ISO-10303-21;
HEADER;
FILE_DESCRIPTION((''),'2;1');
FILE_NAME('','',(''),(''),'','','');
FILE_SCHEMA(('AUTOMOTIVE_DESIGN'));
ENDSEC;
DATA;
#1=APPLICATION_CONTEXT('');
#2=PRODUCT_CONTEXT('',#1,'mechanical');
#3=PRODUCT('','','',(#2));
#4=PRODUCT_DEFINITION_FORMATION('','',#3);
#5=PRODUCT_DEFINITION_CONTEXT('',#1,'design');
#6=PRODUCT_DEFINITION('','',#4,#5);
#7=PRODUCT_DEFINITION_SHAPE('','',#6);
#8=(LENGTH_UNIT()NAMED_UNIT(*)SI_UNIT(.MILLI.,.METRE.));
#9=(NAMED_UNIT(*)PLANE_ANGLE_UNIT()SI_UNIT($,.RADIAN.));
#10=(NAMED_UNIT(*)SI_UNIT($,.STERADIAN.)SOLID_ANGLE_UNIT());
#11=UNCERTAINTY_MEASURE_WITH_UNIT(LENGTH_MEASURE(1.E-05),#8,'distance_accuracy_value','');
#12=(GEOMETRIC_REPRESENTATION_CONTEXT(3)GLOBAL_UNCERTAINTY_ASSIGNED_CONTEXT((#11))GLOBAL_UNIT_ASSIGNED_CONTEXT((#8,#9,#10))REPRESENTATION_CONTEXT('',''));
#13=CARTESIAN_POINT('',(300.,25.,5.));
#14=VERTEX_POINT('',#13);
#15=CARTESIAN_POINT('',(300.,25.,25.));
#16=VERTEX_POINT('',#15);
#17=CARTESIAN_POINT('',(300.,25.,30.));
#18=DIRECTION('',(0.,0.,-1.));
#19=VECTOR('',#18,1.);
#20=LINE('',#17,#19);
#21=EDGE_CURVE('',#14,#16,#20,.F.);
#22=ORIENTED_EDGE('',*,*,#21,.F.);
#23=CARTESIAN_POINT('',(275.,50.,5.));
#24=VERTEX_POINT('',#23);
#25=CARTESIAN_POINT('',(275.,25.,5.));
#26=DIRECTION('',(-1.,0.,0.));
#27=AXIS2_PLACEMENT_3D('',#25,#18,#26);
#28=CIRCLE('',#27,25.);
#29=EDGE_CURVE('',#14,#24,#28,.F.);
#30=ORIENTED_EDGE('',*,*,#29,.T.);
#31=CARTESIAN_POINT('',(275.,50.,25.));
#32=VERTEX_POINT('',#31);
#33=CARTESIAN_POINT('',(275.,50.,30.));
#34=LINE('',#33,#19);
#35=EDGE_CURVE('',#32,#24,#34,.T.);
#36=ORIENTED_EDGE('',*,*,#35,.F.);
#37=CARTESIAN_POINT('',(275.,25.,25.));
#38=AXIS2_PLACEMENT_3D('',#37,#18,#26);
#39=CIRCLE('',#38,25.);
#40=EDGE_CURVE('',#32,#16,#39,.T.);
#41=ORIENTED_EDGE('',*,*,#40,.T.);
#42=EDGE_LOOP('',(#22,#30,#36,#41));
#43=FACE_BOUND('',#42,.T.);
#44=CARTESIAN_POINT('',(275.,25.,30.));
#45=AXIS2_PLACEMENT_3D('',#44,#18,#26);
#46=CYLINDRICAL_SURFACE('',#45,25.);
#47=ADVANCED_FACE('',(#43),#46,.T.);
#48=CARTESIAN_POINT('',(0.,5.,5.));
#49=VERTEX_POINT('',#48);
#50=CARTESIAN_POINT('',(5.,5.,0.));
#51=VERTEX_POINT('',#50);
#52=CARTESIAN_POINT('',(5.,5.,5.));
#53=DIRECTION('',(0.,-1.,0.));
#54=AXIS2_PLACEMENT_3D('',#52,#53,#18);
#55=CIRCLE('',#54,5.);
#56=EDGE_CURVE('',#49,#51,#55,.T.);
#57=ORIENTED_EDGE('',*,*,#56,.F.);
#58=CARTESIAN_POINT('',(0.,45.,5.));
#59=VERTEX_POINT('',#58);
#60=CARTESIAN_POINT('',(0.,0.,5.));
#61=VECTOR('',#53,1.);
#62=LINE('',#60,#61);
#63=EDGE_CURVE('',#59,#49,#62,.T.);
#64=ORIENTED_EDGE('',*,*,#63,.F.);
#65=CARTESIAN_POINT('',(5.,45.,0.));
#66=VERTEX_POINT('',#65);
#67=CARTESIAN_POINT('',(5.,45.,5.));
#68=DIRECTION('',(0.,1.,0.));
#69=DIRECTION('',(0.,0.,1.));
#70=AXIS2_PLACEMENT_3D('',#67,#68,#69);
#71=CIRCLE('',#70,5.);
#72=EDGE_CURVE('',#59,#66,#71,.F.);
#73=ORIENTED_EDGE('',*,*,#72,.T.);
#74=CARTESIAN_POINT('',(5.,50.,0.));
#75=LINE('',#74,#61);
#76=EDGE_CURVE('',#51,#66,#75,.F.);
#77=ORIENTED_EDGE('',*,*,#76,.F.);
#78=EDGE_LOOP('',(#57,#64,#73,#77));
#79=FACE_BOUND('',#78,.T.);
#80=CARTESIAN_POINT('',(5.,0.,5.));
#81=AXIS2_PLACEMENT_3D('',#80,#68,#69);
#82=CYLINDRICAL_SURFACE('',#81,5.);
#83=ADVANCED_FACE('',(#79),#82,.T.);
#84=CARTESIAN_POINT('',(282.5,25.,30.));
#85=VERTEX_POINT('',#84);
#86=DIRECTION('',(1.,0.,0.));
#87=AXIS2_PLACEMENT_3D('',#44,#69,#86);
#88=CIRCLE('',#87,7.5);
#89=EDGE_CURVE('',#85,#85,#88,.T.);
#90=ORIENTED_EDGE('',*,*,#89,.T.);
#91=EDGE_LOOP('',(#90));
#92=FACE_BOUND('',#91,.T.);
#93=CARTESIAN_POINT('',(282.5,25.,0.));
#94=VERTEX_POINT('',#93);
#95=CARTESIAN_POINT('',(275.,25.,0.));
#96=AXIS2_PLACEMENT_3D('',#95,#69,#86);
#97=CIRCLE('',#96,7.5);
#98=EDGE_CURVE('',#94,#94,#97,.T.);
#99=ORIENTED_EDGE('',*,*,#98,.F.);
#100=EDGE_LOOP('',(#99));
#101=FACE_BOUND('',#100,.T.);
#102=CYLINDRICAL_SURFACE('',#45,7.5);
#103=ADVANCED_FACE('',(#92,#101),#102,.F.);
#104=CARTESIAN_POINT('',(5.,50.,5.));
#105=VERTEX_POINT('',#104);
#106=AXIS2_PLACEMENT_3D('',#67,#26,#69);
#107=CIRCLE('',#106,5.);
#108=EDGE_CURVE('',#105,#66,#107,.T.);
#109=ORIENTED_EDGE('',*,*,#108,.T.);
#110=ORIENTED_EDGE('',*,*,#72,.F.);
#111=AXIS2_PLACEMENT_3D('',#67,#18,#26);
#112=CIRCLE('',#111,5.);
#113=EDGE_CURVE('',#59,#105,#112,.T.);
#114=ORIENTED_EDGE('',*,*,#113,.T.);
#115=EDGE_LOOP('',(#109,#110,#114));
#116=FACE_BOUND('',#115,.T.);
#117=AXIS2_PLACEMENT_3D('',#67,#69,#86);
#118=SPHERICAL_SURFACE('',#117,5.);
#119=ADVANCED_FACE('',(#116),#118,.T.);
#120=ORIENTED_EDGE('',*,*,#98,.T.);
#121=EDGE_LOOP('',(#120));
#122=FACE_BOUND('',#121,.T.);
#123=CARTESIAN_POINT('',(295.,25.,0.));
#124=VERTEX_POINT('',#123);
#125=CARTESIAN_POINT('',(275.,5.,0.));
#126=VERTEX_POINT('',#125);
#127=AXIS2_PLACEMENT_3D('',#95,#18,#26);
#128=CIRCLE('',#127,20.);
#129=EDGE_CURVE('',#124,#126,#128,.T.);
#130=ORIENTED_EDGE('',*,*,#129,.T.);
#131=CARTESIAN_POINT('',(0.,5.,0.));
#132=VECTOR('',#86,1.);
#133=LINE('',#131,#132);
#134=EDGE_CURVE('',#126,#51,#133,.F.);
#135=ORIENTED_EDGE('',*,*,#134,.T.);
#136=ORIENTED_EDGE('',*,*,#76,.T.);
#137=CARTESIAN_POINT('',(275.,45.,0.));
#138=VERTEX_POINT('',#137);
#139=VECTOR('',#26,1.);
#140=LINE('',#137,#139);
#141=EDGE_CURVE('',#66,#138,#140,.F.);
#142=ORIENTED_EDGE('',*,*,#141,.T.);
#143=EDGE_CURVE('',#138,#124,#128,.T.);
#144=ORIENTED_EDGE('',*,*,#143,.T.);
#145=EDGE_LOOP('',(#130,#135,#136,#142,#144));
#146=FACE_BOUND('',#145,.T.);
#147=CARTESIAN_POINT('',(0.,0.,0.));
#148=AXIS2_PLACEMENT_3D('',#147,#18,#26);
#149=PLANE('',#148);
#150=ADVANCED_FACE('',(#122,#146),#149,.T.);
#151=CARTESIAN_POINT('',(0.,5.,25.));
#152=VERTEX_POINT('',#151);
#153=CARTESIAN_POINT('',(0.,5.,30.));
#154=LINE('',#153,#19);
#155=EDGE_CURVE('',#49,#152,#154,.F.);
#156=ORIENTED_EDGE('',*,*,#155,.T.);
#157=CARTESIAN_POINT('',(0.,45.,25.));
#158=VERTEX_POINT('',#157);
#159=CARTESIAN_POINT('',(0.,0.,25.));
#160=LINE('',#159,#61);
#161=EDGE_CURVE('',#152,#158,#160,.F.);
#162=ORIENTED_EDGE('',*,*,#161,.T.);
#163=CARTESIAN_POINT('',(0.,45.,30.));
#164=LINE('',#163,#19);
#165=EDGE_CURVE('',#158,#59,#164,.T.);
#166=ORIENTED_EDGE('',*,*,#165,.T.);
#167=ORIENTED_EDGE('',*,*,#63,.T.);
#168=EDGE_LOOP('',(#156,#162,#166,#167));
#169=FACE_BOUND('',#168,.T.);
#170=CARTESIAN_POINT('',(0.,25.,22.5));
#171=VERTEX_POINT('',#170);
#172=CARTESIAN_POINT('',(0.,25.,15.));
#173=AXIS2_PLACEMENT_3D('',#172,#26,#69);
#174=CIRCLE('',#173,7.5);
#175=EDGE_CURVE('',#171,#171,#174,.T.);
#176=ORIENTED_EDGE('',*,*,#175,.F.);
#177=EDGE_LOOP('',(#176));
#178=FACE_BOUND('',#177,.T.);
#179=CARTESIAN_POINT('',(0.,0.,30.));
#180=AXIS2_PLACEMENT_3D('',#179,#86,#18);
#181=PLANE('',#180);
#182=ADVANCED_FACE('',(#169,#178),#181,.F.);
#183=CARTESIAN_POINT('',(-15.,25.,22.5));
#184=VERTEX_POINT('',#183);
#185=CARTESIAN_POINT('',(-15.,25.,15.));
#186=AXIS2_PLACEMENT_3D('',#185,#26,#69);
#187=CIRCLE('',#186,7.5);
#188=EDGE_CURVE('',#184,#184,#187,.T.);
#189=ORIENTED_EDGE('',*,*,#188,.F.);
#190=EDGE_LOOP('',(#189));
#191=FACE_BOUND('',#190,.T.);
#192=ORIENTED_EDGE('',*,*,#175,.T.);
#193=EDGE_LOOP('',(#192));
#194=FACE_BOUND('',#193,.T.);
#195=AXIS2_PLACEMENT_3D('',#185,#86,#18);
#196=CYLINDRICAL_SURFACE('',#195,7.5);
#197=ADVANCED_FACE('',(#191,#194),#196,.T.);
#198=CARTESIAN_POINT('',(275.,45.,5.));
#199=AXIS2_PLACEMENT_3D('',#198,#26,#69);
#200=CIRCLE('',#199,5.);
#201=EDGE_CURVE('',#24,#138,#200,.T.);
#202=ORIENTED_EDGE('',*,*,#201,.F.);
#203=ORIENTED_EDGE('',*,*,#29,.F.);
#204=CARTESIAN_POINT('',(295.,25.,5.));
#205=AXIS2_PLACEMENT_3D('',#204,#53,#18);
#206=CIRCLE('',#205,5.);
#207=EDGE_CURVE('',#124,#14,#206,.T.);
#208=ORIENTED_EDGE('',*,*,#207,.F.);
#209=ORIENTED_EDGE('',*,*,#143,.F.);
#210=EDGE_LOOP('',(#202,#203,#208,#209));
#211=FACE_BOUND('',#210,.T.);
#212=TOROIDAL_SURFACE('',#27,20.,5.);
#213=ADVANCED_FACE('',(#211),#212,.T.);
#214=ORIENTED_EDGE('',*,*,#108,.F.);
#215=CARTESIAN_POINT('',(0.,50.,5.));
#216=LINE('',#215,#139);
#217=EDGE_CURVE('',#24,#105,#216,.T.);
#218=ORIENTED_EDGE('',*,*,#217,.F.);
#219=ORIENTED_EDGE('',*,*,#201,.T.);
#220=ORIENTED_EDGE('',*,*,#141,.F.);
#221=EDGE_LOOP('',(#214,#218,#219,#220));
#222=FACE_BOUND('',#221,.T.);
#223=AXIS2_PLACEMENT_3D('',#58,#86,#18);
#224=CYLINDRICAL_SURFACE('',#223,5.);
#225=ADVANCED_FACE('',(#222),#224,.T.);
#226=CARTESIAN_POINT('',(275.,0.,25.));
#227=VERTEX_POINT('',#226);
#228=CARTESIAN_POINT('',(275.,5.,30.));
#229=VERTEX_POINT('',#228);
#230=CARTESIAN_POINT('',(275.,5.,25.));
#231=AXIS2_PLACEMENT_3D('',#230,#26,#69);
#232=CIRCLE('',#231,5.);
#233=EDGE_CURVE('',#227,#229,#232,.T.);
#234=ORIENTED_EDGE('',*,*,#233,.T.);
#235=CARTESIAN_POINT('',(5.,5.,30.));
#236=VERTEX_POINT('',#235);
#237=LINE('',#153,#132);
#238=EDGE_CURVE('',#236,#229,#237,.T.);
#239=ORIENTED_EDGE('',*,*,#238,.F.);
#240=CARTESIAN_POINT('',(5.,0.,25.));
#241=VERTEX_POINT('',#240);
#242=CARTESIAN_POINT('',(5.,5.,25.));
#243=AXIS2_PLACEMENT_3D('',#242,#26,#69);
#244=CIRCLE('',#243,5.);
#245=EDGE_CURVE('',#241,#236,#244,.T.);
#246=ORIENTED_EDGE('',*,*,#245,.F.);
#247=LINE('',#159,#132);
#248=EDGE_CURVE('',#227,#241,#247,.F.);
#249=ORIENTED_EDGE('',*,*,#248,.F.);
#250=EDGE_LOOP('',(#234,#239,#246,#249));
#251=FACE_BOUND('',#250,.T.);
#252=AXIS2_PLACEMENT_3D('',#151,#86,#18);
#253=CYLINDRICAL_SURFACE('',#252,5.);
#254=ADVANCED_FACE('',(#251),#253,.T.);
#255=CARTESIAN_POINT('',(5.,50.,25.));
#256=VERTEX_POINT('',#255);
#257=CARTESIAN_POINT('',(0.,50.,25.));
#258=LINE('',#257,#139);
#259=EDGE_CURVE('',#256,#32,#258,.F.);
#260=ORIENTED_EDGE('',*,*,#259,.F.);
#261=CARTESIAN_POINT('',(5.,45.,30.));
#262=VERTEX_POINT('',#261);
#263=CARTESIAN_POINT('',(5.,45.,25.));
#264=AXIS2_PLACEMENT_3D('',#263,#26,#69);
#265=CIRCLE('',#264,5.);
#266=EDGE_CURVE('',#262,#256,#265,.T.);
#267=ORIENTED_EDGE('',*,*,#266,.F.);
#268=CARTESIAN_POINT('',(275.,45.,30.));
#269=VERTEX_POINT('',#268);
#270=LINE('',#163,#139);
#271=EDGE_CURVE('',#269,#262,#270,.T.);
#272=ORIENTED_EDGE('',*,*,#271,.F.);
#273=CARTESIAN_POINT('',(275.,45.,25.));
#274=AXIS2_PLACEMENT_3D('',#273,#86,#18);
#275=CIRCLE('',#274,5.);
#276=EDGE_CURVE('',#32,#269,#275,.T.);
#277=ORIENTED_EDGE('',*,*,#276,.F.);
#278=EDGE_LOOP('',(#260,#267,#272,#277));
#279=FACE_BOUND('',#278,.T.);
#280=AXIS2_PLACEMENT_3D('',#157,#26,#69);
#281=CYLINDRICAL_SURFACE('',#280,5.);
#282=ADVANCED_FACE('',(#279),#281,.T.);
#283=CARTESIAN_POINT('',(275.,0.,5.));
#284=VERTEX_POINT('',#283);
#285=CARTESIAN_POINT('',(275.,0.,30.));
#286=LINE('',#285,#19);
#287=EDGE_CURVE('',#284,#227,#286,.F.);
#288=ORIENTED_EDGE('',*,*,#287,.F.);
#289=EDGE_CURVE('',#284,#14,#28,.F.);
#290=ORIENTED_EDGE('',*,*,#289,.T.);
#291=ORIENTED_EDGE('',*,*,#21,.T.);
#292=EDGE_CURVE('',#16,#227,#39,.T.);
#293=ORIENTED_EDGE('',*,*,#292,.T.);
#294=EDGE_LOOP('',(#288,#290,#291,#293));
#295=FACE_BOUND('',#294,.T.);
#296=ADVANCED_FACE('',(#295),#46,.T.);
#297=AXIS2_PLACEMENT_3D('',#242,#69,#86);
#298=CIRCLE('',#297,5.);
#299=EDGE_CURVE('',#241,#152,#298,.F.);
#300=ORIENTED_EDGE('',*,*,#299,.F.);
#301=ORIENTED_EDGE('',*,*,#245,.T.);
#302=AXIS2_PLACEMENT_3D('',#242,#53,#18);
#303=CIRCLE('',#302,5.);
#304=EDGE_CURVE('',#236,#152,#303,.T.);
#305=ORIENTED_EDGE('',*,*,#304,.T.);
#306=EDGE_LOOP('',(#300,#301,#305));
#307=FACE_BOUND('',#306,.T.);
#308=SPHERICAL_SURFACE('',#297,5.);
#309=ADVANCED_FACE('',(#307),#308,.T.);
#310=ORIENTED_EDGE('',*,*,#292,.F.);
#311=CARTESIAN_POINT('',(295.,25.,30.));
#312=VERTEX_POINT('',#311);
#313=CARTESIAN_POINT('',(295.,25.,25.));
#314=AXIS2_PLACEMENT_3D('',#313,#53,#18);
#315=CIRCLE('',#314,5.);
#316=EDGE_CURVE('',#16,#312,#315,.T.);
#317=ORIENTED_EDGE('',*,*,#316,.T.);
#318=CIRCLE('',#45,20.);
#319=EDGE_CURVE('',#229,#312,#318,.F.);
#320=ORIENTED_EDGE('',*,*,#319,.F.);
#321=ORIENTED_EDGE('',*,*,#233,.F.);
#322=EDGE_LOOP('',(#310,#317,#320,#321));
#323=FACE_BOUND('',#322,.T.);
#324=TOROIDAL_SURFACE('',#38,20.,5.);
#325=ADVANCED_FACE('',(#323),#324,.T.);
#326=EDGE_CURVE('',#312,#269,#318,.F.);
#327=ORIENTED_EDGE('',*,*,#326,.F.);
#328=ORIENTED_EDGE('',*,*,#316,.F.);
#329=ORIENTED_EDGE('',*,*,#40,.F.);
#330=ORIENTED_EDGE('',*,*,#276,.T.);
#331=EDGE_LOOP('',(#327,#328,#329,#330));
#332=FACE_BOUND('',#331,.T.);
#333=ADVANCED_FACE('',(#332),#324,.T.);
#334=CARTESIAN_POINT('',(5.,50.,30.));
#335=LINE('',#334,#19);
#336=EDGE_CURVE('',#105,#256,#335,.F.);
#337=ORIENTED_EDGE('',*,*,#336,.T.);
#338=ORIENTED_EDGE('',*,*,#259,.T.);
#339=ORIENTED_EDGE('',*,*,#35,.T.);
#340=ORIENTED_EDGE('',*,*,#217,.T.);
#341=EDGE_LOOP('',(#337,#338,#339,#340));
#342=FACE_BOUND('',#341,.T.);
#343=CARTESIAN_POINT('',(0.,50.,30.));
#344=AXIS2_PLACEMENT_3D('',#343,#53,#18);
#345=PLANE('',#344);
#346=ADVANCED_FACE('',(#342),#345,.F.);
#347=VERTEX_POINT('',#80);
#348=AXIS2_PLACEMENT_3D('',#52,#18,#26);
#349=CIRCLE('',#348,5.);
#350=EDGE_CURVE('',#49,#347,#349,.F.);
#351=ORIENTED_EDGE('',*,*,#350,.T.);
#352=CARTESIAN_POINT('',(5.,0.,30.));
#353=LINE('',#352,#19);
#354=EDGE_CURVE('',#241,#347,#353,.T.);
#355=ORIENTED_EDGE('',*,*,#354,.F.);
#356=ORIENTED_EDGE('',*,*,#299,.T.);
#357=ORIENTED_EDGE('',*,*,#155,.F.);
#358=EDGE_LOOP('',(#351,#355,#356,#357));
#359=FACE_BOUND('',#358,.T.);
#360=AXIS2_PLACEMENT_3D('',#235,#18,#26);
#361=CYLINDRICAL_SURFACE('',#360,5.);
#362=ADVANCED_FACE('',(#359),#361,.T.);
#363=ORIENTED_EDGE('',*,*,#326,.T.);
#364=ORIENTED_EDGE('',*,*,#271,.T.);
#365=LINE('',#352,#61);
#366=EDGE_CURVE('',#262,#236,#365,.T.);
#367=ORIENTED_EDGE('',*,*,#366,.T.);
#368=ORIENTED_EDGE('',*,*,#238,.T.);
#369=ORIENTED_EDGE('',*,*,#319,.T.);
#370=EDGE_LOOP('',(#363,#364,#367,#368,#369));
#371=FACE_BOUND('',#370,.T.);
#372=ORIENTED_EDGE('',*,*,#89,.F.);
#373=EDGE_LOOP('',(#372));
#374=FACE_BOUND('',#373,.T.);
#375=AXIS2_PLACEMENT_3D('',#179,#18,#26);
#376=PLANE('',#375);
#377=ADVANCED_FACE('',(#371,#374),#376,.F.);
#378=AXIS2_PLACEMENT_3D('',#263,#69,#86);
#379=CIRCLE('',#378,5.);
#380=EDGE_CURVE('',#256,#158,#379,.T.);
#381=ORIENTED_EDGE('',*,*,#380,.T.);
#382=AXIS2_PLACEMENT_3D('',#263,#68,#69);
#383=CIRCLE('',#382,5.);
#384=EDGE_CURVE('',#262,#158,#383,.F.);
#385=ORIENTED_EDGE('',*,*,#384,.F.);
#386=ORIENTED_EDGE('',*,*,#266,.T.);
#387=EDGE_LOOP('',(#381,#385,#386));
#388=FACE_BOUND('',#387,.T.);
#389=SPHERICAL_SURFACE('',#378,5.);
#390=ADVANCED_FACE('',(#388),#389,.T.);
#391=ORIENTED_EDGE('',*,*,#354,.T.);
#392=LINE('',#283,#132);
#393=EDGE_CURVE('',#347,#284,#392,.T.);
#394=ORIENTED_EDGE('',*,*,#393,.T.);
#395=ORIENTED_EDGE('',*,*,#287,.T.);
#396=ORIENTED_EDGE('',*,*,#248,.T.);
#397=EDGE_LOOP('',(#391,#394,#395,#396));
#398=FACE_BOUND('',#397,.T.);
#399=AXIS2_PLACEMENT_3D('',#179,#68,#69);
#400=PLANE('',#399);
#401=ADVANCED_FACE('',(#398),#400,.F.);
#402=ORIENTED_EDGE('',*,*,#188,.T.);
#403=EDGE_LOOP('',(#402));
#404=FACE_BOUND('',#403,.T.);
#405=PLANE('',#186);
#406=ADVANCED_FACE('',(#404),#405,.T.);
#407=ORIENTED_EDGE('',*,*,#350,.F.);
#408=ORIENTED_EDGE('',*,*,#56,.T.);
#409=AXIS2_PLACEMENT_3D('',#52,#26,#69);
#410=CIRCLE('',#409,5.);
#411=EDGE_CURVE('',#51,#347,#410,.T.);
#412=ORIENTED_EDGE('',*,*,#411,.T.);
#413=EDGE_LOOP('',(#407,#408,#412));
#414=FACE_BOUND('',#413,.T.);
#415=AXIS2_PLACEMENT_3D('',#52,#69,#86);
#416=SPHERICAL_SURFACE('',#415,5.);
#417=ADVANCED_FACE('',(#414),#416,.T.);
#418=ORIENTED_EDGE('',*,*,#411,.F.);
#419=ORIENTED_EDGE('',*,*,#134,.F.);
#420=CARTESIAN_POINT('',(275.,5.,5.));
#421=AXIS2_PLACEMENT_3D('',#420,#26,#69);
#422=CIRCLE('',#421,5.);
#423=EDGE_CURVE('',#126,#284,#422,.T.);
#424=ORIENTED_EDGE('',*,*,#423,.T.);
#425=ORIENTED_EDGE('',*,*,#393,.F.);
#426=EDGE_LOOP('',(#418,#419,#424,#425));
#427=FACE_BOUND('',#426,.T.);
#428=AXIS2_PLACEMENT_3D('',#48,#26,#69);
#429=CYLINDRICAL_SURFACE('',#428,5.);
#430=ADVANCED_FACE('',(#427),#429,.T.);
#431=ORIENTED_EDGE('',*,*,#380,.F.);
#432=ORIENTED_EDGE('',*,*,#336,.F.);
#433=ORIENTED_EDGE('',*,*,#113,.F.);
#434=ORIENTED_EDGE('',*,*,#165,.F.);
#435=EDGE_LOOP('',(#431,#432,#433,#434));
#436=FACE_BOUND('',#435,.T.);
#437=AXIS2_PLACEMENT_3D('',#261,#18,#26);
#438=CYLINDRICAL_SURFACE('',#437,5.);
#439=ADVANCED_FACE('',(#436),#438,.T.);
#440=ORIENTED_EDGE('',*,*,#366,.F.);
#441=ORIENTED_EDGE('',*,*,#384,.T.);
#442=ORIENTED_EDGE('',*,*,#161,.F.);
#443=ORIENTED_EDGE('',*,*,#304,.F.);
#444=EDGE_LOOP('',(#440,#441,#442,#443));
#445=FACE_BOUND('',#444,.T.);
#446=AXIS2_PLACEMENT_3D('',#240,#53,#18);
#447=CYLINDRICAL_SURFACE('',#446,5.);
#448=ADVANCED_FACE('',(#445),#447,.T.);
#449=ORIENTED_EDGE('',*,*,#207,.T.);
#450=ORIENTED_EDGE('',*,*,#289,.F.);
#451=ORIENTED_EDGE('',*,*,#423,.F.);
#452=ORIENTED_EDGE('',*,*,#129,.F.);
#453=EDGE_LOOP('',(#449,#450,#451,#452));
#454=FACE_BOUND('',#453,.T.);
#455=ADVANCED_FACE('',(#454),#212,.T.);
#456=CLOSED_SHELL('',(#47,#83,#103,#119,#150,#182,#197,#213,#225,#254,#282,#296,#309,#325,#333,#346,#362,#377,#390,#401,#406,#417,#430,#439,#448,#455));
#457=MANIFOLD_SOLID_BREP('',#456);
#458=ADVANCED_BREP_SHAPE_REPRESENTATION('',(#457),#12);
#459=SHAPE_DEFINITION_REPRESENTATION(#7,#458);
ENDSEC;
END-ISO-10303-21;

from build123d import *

# Parameters (mm, degrees)
CROQUIS1_W              = 300
CROQUIS1_H              = 50
CROQUIS1_R              = 7.5
SALIENTE_EXTRUIR1_DEPTH = 30
REDONDEO1_R             = 25
CROQUIS2_R              = 7.5
SALIENTE_EXTRUIR2_DEPTH = 15
REDONDEO2_R             = 5


with BuildPart() as part:
    # Croquis1 → Saliente-Extruir1 (new body)
    with BuildSketch(Plane.XY):
        with Locations((150, 25)):
            Rectangle(CROQUIS1_W, CROQUIS1_H)
        with Locations((275, 25)):
            Circle(CROQUIS1_R, mode=Mode.SUBTRACT)
    extrude(amount=SALIENTE_EXTRUIR1_DEPTH)

    # Redondeo1
    redondeo1_edges = [part.edges().sort_by_distance(p)[0] for p in [
        (300, 0, 15),
        (300, 50, 15),
    ]]
    fillet(redondeo1_edges, radius=REDONDEO1_R - 0.0001)  # a hair under: the kernel refuses the full size

    # Croquis2 → Saliente-Extruir2 (add)
    with BuildSketch(Plane.ZY):
        with Locations((15, 25)):
            Circle(CROQUIS2_R)
    extrude(amount=SALIENTE_EXTRUIR2_DEPTH)

    # Redondeo2
    redondeo2_edges = [part.edges().sort_by_distance(p)[0] for p in [
        (137.50005, 50, 0),
        (292.677698819, 42.677698819, 0),
        (292.677698819, 7.322301181, 0),
        (137.50005, 50, 30),
        (292.677698819, 42.677698819, 30),
        (292.677698819, 7.322301181, 30),
        (0, 25, 30),
        (137.50005, 0, 0),
        (0, 25, 0),
        (137.50005, 0, 30),
        (0, 50, 15),
        (0, 0, 15),
    ]]
    fillet(redondeo2_edges, radius=REDONDEO2_R)


solid = part.part
